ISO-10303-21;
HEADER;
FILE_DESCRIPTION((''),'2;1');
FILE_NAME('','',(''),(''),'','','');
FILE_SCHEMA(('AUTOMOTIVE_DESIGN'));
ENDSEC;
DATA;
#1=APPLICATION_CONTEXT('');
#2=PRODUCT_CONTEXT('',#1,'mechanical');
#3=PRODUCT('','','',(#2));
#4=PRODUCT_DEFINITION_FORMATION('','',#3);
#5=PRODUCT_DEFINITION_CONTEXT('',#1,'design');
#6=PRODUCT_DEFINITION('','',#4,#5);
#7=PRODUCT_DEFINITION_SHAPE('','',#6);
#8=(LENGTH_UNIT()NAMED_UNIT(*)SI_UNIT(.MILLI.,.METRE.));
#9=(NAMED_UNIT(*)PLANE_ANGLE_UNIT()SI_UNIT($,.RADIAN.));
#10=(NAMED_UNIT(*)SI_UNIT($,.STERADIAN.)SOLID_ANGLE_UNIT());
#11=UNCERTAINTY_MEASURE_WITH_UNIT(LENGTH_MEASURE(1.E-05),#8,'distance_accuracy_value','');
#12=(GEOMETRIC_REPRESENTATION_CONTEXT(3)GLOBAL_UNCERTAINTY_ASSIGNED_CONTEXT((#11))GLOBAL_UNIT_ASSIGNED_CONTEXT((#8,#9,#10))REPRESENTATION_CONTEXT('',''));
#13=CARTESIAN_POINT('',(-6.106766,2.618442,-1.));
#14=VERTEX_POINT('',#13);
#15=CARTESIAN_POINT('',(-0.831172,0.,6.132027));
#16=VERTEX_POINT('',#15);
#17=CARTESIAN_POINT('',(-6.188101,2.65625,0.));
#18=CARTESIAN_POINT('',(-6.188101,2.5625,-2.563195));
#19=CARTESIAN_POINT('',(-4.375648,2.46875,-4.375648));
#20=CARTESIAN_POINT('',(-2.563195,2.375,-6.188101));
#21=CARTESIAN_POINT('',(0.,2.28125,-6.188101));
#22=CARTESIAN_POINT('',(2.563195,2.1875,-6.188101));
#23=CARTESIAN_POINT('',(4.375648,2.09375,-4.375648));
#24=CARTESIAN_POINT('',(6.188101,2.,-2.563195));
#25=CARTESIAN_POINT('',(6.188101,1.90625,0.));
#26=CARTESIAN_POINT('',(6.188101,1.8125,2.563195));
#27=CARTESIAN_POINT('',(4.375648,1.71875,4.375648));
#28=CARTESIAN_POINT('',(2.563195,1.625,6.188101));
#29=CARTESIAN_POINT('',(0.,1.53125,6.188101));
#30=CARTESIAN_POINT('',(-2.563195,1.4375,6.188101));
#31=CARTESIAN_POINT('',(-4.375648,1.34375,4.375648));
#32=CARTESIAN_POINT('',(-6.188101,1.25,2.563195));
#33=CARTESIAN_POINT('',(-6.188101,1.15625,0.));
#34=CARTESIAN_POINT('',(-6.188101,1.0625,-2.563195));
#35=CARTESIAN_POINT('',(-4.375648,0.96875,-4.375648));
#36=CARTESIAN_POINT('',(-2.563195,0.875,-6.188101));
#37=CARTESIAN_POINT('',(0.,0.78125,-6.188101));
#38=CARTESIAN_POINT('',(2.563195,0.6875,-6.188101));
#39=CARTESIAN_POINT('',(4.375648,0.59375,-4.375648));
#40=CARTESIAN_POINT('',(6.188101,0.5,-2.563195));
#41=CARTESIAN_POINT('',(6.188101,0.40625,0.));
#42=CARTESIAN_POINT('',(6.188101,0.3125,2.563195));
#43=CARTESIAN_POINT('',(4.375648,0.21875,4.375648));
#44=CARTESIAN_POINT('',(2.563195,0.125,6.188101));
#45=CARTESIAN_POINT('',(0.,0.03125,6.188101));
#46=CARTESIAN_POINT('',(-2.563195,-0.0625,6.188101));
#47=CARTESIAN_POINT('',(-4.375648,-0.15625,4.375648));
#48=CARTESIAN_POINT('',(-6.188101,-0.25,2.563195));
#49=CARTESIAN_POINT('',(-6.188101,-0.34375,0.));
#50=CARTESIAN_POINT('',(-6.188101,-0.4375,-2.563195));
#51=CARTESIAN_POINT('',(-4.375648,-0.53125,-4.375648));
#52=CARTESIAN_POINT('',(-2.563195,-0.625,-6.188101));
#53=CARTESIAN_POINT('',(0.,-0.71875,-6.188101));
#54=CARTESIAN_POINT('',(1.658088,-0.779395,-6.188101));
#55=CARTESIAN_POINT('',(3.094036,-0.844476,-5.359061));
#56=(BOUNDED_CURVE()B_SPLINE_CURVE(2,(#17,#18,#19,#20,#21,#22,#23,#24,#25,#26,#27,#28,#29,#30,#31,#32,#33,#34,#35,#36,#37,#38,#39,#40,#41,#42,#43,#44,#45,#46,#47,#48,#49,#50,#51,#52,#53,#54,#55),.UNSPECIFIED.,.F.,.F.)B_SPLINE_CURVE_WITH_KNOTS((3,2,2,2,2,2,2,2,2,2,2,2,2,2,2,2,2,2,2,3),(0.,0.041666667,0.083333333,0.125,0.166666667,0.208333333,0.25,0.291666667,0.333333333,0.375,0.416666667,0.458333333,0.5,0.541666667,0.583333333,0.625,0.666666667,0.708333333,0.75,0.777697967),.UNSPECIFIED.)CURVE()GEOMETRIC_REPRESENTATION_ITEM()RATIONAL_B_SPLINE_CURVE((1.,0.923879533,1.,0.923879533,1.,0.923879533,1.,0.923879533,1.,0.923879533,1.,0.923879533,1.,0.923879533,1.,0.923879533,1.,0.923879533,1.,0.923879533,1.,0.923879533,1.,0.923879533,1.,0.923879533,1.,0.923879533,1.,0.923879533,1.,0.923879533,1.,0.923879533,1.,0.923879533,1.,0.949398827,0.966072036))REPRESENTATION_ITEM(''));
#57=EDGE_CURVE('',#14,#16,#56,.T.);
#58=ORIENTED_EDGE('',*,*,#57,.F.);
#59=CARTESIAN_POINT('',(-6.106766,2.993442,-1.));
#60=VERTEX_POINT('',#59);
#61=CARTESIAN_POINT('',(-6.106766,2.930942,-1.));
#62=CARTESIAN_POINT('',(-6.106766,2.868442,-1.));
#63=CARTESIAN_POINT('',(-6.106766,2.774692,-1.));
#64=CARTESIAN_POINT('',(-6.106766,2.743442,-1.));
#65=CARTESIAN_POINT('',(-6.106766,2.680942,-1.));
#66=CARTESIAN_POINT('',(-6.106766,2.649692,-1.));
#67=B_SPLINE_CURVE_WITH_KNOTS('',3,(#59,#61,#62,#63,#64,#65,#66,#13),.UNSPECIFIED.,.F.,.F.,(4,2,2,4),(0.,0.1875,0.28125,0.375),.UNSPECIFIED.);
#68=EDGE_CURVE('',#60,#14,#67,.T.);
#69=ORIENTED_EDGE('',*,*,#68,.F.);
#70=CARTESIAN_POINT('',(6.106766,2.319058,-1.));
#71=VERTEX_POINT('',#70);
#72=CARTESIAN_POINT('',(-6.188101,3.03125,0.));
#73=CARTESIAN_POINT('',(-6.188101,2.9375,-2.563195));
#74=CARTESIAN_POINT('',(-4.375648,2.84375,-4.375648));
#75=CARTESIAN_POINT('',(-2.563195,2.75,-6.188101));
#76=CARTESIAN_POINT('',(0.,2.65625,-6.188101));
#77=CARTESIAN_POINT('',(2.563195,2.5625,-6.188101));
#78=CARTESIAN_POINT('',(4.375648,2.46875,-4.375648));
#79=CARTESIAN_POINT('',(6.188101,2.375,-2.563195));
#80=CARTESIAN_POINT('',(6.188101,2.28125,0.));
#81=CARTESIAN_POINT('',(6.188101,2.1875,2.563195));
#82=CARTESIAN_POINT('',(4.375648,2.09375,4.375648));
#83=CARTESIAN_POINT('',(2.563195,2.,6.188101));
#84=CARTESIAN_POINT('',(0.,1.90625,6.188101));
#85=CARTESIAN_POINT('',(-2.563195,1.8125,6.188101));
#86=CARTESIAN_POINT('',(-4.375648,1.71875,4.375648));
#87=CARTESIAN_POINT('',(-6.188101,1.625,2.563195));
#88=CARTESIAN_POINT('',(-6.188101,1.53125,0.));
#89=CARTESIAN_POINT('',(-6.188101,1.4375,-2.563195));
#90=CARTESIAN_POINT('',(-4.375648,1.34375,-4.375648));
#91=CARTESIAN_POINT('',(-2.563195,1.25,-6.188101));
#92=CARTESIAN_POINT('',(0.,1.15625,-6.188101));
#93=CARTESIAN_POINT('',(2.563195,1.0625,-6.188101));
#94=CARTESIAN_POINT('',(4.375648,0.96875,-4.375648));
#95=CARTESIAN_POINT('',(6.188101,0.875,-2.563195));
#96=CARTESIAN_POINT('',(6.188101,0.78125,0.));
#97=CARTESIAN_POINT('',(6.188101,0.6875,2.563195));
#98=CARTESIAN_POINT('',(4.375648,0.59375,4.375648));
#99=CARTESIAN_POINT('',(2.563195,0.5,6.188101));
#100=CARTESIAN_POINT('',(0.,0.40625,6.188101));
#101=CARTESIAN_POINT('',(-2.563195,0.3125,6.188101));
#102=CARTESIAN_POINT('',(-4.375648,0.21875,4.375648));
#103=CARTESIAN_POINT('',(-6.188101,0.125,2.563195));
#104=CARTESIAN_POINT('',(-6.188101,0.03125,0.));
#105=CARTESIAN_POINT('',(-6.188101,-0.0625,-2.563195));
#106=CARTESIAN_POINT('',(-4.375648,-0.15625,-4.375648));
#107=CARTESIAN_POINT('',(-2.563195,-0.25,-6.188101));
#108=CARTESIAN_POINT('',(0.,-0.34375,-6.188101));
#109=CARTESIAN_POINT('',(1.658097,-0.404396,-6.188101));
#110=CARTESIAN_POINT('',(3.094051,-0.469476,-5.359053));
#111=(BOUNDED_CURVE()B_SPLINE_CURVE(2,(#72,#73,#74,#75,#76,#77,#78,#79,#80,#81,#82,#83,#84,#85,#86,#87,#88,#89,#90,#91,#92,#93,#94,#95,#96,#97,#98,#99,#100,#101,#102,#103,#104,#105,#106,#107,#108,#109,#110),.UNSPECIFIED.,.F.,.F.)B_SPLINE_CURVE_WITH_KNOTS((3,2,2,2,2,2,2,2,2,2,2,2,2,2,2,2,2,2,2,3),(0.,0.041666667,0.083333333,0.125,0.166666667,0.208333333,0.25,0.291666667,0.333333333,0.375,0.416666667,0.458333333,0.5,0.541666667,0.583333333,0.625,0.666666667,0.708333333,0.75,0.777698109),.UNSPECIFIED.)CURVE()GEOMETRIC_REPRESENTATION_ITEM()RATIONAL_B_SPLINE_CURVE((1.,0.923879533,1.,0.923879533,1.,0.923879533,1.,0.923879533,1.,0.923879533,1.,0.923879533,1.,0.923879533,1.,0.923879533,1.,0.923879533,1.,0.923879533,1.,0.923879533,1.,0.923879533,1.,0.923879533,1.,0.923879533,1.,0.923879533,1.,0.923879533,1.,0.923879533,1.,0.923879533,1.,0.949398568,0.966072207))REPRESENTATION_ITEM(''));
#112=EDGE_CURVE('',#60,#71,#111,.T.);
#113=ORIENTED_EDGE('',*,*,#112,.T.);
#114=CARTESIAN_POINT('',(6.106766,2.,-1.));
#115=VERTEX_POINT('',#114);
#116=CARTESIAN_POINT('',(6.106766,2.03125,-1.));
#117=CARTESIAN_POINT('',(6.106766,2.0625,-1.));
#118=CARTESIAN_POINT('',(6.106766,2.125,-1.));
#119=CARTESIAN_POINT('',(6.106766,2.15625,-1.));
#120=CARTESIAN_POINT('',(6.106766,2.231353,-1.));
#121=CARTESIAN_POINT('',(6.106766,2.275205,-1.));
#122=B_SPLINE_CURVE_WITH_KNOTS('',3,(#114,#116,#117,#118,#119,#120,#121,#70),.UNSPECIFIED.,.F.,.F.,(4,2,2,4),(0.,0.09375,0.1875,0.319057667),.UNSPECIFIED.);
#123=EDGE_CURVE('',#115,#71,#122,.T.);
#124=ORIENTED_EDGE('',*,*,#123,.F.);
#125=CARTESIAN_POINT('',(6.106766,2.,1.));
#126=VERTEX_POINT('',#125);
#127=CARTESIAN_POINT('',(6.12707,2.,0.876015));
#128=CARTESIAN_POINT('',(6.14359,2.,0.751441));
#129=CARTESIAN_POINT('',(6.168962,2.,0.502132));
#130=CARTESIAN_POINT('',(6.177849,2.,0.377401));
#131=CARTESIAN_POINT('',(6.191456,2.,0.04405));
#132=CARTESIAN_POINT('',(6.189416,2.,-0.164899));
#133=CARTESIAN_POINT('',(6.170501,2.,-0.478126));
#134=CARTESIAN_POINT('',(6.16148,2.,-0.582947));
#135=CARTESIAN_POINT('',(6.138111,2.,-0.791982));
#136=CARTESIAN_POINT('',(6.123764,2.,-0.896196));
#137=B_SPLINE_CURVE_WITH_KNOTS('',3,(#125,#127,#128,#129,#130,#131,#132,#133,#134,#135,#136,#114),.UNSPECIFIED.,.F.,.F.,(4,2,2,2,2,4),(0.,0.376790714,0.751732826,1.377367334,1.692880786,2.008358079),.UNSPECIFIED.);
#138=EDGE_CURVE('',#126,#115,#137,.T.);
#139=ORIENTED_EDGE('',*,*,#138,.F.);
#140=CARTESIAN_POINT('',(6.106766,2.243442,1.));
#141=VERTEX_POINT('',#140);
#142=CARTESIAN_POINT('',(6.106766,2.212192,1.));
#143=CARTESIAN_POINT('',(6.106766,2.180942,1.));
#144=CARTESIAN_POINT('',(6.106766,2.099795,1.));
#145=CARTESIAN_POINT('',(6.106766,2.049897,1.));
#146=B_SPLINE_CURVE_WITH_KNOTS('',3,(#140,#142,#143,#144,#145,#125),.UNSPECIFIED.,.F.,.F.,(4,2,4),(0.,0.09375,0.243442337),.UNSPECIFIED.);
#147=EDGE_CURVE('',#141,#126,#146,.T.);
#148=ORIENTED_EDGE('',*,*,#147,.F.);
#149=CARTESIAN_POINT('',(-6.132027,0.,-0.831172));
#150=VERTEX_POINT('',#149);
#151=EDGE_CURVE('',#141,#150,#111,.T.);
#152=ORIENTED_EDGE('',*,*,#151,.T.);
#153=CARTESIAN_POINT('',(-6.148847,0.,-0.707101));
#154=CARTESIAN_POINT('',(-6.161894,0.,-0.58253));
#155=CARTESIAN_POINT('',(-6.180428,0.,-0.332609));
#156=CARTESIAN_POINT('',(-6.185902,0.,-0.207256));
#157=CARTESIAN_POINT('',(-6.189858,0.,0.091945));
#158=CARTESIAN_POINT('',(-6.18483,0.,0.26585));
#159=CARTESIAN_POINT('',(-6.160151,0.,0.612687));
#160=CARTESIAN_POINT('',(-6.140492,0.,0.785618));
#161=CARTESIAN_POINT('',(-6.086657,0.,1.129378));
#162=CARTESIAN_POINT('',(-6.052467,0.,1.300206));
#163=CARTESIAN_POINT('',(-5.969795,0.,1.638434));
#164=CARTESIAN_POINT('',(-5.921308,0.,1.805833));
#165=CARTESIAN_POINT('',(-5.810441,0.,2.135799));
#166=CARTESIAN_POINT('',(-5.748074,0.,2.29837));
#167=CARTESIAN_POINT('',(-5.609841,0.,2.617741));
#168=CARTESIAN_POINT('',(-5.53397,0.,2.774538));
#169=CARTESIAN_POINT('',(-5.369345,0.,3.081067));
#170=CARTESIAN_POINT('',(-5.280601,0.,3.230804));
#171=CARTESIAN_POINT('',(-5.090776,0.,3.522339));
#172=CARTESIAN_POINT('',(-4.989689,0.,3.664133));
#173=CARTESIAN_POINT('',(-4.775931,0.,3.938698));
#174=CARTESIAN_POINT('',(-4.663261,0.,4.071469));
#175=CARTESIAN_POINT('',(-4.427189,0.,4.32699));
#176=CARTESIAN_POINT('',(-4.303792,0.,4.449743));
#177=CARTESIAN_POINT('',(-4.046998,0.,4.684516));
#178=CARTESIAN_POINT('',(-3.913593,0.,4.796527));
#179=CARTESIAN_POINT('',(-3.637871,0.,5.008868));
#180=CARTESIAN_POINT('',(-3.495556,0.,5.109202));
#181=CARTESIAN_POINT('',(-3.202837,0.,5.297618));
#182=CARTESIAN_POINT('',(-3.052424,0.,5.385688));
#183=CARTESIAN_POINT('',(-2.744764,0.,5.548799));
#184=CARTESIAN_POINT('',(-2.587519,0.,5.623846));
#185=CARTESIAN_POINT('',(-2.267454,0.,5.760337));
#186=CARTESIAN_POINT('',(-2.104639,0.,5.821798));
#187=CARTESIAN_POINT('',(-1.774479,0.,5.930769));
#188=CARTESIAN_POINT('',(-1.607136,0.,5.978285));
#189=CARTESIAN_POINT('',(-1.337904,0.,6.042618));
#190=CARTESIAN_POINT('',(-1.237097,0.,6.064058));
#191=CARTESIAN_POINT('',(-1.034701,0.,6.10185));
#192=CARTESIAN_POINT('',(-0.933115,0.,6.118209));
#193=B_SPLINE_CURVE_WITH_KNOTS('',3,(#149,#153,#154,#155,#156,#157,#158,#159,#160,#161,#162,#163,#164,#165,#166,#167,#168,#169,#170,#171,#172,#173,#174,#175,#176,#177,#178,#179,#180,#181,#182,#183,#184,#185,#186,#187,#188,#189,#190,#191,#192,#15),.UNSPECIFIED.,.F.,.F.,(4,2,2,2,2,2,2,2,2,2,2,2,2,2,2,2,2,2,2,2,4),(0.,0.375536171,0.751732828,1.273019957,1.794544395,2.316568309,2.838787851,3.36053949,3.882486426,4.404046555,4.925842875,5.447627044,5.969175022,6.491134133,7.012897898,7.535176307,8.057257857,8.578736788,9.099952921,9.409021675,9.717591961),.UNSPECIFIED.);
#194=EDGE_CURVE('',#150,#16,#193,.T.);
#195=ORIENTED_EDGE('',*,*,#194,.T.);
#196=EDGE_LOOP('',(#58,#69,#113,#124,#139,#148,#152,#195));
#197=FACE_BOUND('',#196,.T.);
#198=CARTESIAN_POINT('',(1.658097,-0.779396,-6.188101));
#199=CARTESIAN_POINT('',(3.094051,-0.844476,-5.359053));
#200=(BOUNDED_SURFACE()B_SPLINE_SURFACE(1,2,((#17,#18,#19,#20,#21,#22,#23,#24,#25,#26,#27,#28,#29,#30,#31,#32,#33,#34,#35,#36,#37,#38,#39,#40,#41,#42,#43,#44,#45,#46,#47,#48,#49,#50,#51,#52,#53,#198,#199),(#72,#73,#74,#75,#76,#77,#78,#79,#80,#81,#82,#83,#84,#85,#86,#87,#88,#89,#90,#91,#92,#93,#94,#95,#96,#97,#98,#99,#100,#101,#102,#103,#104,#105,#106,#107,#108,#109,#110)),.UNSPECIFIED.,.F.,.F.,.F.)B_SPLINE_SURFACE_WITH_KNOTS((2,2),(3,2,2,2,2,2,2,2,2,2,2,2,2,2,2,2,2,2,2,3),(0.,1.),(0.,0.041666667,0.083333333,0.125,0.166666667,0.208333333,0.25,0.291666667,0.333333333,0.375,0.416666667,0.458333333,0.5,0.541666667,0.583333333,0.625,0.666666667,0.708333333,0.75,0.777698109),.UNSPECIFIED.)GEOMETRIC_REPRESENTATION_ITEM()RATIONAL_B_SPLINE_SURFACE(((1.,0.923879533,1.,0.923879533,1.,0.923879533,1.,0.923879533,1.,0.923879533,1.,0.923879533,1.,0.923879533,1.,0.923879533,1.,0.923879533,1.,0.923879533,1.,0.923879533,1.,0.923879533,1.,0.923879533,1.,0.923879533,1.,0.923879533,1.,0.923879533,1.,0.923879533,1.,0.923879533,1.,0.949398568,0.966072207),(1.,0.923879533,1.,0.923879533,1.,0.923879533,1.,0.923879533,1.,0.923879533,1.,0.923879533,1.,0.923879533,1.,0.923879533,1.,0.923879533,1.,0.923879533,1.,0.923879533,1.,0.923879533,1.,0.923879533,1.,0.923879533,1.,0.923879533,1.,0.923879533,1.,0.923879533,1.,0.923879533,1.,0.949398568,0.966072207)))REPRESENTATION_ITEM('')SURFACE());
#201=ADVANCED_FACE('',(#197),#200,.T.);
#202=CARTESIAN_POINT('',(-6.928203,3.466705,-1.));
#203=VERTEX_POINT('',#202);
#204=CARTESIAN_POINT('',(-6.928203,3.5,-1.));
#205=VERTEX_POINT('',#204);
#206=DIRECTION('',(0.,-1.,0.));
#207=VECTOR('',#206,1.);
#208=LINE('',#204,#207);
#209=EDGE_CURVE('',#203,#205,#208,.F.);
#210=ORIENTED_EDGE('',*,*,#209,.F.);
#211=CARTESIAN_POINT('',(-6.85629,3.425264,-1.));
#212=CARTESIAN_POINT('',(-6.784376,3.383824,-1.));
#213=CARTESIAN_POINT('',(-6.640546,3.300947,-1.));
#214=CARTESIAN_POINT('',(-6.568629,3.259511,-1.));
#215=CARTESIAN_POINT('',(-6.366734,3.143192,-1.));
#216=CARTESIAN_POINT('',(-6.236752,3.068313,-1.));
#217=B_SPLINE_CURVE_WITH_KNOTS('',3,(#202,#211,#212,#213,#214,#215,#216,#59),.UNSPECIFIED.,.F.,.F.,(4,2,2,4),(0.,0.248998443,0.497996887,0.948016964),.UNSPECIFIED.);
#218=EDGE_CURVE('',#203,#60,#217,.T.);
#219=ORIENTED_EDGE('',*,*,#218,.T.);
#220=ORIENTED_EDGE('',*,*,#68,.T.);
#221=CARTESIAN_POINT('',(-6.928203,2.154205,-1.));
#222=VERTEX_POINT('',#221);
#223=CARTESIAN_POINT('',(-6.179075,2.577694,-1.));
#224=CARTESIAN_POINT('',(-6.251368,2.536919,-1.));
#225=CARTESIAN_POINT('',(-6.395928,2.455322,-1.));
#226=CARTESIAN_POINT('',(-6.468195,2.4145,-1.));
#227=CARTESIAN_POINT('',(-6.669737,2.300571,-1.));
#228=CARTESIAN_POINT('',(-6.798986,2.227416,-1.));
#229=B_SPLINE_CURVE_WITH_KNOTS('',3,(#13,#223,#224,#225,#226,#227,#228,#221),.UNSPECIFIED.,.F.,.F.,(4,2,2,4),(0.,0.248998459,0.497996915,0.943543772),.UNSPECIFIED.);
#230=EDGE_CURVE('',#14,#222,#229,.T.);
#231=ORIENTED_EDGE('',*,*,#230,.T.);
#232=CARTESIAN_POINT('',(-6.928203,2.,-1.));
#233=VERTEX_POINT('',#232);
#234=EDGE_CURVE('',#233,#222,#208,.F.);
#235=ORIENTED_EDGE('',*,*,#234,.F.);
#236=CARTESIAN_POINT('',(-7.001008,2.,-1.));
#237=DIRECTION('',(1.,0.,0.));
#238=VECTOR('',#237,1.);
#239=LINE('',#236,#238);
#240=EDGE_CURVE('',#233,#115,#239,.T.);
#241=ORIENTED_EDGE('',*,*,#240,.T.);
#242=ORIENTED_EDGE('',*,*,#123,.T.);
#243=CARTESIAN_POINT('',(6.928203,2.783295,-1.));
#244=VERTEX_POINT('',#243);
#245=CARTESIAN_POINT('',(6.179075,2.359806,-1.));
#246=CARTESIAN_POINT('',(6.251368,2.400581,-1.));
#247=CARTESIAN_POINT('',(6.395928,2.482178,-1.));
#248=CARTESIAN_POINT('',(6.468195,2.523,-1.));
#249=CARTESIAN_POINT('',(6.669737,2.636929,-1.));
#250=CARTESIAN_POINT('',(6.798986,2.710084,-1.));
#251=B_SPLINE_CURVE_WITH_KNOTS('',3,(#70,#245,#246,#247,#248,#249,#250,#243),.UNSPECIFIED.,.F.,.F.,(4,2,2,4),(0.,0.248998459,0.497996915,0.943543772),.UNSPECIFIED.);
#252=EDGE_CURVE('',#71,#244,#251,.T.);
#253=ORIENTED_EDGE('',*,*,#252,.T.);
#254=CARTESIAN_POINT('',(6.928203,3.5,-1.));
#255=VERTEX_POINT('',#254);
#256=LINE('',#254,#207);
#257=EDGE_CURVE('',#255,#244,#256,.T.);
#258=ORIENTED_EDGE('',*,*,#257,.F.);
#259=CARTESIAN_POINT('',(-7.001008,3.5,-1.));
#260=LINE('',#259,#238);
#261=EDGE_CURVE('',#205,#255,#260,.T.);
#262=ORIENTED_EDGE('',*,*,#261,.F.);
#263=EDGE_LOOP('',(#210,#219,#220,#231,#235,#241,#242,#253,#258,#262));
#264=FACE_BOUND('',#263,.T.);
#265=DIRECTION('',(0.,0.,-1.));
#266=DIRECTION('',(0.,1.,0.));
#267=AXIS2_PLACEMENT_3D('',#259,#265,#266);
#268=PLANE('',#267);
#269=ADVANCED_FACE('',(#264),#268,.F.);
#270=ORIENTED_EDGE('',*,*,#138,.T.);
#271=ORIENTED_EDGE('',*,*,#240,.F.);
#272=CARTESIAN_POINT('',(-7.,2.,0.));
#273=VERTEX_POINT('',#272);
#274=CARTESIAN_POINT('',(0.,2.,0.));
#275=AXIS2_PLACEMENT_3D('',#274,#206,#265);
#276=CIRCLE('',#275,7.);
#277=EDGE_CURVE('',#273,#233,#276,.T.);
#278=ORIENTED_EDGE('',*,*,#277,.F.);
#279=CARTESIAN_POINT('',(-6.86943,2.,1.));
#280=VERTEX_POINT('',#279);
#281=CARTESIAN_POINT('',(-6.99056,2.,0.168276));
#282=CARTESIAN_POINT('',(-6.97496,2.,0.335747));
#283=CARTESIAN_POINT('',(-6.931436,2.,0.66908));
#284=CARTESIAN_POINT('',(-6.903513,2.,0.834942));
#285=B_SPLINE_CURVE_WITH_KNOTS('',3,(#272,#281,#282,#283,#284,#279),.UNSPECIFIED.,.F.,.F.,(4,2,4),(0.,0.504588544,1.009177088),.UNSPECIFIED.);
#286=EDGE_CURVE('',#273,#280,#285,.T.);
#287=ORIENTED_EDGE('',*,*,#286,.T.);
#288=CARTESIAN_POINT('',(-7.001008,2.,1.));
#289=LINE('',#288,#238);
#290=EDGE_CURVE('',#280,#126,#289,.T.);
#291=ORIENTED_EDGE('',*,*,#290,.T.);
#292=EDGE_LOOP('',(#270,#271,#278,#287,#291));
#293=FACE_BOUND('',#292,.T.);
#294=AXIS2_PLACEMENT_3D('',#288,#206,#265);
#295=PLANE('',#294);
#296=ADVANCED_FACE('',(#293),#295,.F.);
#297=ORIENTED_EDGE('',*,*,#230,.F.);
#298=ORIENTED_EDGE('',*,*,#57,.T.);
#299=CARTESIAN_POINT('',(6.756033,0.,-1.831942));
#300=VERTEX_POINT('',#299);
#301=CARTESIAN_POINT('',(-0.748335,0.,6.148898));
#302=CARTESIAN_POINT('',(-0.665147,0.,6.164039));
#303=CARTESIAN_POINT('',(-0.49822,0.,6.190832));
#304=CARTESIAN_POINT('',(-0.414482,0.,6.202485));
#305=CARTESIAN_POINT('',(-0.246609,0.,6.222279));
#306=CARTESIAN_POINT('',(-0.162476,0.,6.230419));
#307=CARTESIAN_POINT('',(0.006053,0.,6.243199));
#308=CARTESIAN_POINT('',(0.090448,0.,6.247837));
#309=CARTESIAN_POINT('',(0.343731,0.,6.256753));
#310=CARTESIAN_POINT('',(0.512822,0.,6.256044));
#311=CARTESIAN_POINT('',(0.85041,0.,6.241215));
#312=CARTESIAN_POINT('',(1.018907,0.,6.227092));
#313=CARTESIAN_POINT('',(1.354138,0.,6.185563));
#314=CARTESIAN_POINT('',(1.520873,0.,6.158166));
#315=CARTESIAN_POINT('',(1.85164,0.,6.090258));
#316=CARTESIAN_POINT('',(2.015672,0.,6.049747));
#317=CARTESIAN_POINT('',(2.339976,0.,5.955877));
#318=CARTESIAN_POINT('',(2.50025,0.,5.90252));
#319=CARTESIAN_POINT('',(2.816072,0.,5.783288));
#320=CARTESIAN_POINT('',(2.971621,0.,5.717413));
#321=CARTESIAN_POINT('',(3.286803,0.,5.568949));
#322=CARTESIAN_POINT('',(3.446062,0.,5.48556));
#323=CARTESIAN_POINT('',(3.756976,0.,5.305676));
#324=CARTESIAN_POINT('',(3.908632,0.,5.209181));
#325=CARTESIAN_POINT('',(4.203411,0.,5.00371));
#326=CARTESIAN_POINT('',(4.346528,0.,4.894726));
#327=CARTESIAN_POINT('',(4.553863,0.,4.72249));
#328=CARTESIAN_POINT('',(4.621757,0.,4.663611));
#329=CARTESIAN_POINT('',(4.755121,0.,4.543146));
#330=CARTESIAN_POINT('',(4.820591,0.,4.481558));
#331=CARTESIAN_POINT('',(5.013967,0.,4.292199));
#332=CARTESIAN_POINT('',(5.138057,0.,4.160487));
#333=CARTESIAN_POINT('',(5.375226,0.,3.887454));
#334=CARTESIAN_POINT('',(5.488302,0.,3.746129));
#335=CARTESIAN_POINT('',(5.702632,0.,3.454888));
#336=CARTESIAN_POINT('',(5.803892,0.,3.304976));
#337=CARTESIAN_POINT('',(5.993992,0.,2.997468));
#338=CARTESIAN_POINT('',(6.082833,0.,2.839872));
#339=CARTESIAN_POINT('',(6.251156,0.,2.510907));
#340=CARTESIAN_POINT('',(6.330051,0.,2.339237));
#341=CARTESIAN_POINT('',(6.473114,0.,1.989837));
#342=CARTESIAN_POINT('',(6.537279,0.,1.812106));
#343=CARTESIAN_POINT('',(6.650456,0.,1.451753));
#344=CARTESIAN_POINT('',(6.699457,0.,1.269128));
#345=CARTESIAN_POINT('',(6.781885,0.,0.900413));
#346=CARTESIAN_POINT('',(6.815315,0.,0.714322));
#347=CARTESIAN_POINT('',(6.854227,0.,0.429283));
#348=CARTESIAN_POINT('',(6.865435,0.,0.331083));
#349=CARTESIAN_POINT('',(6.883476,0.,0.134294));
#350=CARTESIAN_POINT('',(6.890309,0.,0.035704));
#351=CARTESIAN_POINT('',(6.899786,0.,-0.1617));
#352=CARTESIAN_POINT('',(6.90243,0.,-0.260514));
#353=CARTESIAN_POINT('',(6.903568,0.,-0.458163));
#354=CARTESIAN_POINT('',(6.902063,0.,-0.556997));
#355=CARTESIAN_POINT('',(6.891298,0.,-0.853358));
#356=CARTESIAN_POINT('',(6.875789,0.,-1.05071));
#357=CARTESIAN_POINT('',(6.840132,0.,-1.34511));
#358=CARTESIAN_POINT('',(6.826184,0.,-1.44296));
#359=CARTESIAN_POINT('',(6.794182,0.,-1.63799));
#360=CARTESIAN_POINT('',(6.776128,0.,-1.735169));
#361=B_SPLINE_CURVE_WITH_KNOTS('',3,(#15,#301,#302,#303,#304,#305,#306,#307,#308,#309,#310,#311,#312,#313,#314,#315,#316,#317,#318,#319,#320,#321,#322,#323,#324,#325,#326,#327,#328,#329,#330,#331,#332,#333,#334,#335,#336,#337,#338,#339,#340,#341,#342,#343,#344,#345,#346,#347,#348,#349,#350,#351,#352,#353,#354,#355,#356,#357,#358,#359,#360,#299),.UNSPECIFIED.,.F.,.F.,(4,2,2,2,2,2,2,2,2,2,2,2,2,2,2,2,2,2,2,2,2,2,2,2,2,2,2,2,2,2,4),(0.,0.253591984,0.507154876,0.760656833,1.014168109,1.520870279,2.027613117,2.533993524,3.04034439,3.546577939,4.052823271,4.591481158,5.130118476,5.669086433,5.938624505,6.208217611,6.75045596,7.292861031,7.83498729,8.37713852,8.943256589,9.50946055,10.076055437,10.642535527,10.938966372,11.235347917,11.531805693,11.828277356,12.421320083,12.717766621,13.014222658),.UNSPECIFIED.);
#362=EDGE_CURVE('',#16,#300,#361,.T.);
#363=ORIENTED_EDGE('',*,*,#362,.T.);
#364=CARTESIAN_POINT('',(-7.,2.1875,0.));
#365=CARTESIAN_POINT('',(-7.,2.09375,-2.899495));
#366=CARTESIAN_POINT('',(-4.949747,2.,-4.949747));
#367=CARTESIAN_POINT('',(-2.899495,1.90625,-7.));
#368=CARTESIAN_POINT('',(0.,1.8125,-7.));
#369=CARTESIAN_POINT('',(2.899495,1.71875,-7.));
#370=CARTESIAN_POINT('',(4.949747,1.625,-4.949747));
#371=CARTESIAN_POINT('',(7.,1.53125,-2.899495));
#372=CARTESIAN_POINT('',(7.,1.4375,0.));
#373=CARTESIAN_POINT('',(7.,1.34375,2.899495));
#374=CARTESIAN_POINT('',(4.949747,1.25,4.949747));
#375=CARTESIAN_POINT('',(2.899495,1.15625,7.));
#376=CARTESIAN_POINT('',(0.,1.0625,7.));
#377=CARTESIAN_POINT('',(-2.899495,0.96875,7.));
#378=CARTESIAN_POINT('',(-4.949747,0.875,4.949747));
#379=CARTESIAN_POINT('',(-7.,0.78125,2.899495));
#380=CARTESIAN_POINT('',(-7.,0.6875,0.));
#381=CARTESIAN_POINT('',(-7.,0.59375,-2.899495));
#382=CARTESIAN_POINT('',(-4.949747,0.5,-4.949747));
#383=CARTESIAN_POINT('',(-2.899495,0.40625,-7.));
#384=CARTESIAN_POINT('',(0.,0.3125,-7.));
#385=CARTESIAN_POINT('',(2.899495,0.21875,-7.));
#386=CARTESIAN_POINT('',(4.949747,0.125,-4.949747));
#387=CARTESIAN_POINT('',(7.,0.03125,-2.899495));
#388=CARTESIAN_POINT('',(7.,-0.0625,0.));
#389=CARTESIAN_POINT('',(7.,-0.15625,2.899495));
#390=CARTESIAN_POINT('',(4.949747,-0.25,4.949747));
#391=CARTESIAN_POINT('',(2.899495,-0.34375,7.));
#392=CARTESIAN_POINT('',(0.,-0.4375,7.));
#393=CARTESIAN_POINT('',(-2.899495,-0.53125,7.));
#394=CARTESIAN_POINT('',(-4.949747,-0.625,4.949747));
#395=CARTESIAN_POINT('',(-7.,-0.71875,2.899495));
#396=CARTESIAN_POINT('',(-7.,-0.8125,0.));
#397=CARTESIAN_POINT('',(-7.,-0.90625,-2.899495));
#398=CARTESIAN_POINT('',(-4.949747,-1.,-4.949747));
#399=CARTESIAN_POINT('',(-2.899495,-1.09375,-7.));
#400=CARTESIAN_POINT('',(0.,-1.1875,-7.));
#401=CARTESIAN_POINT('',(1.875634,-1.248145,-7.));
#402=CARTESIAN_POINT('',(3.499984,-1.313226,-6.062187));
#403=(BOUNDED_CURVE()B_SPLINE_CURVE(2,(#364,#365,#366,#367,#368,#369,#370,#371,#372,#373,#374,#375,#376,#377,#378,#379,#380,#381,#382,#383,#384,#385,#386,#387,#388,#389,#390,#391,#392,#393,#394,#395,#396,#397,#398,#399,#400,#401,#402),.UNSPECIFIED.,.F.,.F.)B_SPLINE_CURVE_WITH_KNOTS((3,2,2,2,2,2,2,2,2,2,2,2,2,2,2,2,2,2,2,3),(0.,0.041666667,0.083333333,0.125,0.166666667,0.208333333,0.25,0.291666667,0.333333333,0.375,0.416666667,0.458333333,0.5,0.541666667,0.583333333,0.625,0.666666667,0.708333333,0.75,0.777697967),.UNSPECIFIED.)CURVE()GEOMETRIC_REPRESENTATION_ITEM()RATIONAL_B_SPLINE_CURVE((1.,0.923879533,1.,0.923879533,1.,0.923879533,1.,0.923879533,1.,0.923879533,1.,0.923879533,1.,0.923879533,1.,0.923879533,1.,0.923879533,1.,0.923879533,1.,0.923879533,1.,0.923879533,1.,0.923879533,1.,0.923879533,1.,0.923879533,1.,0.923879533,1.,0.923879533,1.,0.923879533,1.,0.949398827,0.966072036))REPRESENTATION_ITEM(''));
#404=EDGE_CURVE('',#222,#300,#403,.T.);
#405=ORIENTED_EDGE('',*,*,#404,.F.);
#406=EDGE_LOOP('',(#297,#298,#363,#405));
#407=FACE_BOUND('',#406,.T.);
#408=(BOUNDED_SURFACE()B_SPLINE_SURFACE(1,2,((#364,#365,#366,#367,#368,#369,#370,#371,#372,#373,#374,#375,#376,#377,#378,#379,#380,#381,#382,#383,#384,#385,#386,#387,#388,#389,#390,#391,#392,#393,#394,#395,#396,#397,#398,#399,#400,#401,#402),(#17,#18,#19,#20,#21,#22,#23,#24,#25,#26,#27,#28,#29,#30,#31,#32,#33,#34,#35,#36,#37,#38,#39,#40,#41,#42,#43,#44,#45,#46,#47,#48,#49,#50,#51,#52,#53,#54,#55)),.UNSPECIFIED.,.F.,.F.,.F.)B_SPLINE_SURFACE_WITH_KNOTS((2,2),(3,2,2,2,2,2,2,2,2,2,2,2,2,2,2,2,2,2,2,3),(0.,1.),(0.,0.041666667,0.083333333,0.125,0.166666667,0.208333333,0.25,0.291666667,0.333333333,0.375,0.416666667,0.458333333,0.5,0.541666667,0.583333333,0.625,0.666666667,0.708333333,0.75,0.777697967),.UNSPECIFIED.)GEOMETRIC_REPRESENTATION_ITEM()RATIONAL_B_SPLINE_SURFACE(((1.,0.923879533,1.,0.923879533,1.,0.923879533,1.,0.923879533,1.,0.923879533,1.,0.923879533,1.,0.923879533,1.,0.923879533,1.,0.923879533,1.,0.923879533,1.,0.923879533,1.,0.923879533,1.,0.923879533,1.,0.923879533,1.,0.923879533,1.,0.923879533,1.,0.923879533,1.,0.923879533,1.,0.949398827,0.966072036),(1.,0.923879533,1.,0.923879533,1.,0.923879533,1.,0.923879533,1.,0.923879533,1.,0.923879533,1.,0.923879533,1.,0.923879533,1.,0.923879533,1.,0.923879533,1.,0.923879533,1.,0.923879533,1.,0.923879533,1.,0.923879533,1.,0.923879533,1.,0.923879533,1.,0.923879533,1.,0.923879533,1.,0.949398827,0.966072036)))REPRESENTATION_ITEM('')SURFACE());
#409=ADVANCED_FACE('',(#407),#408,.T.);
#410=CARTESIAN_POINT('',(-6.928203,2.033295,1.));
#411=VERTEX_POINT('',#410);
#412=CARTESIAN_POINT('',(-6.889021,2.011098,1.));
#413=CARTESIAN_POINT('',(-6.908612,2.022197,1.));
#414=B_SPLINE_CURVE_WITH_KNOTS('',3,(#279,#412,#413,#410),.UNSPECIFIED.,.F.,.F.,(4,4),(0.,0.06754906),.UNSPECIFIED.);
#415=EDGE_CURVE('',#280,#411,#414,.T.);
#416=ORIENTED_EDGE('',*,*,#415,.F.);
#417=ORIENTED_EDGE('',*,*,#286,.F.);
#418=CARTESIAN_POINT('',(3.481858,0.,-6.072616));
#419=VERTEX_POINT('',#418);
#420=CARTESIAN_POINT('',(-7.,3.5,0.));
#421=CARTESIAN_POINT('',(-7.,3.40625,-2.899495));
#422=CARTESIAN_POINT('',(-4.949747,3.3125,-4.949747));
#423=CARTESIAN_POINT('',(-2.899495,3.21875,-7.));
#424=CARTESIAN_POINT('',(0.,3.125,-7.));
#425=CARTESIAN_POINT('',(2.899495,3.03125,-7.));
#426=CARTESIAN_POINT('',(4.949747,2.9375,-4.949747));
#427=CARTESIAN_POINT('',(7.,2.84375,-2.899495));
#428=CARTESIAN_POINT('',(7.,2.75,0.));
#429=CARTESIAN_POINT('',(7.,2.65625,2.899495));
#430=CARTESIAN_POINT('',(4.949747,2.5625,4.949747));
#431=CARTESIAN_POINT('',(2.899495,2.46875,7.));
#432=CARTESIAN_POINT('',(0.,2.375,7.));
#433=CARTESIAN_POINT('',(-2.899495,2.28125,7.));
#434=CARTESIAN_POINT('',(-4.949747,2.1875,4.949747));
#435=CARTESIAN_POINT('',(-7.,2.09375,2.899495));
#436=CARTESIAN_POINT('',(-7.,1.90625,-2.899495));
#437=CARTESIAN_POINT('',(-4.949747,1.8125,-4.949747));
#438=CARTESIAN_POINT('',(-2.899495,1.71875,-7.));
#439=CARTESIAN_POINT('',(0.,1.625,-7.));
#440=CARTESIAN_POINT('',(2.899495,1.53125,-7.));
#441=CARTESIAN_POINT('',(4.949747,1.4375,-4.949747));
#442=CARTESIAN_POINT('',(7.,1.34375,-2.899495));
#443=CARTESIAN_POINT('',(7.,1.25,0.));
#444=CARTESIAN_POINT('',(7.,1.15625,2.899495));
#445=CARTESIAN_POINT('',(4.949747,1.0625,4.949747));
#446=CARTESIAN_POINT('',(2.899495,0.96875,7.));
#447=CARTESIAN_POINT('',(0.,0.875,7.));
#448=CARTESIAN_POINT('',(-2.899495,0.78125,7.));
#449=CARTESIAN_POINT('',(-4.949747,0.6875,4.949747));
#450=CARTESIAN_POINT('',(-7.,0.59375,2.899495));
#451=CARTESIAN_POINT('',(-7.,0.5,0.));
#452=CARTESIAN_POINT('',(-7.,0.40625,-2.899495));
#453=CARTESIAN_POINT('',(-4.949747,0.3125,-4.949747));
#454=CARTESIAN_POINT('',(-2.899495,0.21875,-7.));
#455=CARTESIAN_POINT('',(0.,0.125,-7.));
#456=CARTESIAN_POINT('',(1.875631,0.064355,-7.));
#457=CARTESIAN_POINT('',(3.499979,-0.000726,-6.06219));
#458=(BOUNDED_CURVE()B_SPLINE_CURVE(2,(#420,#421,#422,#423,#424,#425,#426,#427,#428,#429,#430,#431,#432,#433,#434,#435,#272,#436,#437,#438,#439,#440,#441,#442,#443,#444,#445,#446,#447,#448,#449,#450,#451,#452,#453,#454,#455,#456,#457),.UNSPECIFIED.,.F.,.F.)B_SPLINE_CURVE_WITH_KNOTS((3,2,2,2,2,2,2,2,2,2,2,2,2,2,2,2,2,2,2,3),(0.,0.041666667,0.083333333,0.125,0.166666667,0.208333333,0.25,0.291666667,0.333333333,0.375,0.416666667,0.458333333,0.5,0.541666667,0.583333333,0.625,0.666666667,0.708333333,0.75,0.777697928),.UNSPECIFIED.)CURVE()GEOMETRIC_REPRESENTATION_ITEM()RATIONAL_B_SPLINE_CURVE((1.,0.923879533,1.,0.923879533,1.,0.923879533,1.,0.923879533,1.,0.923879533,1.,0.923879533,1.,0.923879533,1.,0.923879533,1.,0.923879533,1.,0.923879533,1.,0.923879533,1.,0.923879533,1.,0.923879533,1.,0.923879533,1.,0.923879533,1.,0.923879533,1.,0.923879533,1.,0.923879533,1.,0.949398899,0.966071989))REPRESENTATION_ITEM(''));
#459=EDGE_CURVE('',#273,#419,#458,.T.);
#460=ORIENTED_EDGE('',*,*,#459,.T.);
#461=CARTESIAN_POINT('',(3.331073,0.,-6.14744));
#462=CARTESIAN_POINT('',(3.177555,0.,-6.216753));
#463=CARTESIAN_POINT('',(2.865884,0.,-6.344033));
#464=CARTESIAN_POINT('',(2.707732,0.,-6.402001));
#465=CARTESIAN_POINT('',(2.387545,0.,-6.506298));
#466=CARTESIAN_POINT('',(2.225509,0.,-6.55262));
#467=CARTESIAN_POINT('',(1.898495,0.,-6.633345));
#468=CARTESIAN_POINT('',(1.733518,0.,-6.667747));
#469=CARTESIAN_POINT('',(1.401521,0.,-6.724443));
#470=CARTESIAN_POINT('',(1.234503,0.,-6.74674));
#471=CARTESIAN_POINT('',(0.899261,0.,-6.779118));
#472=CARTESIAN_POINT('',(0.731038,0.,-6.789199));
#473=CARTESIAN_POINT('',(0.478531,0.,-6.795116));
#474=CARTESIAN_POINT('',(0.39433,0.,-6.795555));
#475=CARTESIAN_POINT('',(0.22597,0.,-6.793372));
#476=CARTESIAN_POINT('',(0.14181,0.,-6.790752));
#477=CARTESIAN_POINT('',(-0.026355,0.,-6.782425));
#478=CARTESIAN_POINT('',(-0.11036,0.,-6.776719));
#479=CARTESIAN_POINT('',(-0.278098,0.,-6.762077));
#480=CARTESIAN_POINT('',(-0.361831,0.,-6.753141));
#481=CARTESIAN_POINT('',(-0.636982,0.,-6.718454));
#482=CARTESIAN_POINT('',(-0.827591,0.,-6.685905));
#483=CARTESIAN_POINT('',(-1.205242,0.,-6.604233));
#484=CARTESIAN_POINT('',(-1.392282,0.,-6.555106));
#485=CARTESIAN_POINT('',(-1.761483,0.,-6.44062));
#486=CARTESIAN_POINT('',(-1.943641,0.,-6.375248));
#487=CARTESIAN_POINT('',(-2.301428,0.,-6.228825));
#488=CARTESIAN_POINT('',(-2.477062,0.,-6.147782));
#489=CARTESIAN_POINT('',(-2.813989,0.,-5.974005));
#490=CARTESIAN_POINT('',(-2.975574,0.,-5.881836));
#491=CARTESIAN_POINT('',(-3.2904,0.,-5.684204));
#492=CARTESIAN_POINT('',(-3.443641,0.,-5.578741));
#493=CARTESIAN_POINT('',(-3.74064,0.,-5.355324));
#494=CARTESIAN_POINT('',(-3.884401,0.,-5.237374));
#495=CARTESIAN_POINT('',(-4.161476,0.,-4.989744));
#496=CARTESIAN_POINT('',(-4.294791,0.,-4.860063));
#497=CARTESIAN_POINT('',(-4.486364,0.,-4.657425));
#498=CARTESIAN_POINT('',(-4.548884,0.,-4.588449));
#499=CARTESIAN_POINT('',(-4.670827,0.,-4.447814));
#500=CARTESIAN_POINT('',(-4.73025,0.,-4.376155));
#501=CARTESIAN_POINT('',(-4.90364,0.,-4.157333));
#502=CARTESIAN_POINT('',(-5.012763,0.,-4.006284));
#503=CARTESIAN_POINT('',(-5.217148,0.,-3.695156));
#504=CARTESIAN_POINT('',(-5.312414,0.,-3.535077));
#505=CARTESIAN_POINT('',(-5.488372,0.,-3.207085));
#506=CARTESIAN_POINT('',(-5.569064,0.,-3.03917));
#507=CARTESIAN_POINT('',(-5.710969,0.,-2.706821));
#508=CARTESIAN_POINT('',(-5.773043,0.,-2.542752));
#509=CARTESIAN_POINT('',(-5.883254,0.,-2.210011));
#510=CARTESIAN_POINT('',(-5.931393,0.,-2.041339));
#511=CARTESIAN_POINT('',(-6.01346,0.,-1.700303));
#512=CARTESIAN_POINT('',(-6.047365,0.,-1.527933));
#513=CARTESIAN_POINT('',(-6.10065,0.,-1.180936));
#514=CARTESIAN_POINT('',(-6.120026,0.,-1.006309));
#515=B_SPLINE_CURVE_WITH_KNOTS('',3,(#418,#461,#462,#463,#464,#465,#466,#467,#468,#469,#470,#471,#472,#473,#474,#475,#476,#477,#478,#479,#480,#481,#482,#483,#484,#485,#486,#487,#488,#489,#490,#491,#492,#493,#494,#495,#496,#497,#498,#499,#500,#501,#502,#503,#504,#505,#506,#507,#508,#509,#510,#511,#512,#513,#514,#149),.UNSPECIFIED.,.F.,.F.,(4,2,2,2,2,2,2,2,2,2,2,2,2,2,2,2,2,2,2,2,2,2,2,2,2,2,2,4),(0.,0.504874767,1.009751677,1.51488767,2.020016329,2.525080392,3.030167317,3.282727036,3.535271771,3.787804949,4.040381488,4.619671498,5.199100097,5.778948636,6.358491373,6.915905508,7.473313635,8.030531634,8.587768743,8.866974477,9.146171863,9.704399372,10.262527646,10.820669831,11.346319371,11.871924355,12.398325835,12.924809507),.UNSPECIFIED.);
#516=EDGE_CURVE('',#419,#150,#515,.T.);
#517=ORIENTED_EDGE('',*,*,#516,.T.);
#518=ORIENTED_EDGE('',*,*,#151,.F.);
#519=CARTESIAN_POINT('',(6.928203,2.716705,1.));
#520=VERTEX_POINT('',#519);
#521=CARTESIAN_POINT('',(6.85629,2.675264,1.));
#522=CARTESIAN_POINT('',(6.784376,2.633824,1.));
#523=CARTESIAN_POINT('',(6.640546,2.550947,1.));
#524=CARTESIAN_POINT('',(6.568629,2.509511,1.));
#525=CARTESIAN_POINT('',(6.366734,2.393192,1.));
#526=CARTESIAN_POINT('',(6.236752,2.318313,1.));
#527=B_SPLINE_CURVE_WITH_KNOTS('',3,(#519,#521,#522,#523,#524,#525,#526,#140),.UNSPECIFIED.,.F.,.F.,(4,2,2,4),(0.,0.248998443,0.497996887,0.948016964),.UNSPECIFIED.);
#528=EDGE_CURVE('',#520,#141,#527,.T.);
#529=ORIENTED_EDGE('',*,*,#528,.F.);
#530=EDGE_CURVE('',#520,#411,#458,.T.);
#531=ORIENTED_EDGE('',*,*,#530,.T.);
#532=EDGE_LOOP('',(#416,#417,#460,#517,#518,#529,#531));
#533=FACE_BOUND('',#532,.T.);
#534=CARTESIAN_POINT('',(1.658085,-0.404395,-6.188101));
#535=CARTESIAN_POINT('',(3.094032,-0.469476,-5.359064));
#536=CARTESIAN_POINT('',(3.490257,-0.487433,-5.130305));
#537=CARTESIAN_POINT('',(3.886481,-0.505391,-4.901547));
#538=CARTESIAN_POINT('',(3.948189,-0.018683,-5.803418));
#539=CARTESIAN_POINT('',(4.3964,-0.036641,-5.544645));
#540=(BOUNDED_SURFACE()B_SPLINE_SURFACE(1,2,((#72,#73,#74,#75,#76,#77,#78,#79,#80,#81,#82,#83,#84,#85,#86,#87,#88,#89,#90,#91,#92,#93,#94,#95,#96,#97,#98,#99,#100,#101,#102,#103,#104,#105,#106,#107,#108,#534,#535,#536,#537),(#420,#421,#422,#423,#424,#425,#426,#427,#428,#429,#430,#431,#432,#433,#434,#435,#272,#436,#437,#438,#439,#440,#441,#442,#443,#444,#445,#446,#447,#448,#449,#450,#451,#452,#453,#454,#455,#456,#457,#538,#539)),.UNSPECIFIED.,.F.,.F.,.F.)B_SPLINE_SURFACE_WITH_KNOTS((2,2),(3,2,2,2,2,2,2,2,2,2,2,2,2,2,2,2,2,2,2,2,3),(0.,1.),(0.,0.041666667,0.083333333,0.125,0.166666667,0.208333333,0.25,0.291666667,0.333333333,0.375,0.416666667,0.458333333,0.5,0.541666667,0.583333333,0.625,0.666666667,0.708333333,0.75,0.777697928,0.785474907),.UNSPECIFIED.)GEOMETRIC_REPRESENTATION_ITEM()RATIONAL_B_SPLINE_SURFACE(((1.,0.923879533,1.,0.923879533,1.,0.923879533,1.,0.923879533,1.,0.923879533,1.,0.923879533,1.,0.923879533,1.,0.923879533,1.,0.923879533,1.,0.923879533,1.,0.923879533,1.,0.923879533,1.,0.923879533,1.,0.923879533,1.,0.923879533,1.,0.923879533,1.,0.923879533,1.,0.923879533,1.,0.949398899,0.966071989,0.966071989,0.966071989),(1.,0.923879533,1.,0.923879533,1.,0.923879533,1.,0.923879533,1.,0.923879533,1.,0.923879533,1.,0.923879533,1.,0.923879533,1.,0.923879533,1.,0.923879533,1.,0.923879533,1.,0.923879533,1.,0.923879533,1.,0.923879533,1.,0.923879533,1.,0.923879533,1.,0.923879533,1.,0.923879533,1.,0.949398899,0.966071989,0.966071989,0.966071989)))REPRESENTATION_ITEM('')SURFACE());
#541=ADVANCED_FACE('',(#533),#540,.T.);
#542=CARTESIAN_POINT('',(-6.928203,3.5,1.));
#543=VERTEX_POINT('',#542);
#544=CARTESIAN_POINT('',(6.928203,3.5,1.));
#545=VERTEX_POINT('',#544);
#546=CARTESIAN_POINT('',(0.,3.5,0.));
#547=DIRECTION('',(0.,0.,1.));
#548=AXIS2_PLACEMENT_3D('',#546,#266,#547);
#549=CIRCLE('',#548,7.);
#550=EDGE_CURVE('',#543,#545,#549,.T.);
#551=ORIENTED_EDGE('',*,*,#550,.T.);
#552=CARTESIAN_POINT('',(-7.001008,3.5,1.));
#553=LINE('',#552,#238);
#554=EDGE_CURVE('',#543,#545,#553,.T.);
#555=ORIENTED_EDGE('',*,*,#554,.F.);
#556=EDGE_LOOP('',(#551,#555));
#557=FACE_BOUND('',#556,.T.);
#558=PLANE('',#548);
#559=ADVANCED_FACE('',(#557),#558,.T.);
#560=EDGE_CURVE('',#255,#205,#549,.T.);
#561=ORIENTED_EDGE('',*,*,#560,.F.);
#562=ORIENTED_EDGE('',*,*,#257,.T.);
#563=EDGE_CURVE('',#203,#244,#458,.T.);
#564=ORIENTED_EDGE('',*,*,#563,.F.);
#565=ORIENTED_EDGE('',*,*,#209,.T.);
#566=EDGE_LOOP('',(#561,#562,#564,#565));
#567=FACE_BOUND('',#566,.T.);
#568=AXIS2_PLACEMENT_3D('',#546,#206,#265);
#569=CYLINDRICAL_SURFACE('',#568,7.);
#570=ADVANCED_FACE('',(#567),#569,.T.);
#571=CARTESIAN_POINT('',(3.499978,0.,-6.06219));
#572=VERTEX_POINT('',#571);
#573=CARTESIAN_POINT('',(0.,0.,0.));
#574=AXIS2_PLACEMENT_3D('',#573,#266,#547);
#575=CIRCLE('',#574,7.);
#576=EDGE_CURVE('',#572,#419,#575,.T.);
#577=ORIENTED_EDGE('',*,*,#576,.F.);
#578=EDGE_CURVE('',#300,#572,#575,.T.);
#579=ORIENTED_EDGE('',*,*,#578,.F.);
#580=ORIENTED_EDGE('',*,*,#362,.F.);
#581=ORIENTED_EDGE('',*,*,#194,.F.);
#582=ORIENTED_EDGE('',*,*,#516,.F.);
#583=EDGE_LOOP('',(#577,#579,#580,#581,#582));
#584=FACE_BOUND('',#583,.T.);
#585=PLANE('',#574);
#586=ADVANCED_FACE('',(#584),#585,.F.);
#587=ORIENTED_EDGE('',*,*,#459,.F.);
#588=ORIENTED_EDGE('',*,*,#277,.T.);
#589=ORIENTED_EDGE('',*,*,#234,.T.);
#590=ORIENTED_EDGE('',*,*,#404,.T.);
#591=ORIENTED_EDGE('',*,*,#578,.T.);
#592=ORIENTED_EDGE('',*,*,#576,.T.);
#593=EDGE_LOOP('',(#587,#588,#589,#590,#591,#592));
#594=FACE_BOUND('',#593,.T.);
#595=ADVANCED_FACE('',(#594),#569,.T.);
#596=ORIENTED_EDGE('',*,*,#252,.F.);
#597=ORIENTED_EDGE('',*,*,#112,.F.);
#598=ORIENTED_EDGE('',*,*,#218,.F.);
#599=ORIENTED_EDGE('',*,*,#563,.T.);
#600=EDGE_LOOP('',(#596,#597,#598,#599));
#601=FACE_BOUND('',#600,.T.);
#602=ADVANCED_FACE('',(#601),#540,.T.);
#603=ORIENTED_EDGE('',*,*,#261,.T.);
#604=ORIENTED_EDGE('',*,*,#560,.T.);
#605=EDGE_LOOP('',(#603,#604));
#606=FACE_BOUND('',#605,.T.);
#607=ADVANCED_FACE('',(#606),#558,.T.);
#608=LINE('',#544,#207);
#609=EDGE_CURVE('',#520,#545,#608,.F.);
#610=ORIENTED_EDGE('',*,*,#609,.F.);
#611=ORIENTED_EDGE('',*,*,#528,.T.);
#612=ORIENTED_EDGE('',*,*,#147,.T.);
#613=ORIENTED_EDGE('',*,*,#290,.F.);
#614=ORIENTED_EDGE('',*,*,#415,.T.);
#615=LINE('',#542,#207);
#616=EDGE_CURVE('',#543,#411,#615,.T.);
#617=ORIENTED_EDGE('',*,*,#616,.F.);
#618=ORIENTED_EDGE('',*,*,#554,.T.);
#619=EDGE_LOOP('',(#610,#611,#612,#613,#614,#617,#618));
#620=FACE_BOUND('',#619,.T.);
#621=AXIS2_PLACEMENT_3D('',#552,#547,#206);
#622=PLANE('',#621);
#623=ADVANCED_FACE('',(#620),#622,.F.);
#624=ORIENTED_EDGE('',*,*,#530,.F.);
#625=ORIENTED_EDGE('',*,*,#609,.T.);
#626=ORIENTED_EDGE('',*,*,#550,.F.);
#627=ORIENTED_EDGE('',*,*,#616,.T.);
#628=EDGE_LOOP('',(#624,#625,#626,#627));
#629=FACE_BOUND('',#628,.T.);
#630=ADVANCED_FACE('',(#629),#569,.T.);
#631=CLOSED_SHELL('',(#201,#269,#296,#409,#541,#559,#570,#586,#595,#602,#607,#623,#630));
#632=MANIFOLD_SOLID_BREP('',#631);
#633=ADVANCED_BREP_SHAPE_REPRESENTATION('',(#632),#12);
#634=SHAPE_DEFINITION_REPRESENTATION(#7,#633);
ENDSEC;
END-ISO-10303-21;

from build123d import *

# Parameters (mm, degrees)
SKETCH_1_R               = 7
EXTRUDE_1_DEPTH          = 3.5
THREAD_1_PITCH           = 1.5
CUT_EXTRUDE_1_DEPTH      = 11.5000004
CUT_EXTRUDE_1_DEPTH_BACK = 11.5000004
SKETCH_4_W               = 2
SKETCH_4_H               = 1.5


with BuildPart() as part:
    # Sketch 1 → Бобышка-Вытянуть1 (new body)
    with BuildSketch(Plane(origin=(0, 0, 0), x_dir=(1, 0, 0), z_dir=(0, 1, 0))):
        with Locations(Location((0, 0, 0), (0, 0, 270))):
            Circle(SKETCH_1_R)
    extrude(amount=EXTRUDE_1_DEPTH)

    # Резьба1: the profile of Sketch 1 2 profile screwed along a right-hand helix of 2.333333 turns, 8 arcs to a turn; built about Z, then put on its axis
    thread_1_z = Axis((0, 0, 0), (0, 0, 1))
    thread_1_corners = [(7.0003, 0, -0.000173205), (7.0003, 0, 1.312673201), (6.188101188, 0, 0.843749998), (6.188101188, 0, 0.468749998)]
    with BuildLine(mode=Mode.PRIVATE) as thread_1_profile:
        Line(thread_1_corners[0], thread_1_corners[1])
        Line(thread_1_corners[1], thread_1_corners[2])
        Line(thread_1_corners[2], thread_1_corners[3])
        Line(thread_1_corners[3], thread_1_corners[0])
    thread_1_cap = Face(thread_1_profile.wire())
    thread_1_turn_angles = [0, 22.5, 45, 67.5, 90, 112.5, 135, 157.5, 180, 202.5, 225, 247.5, 270, 292.5, 315, 337.5, 360]
    thread_1_turn_weights = [1, 0.9238795325112867, 1, 0.9238795325112867, 1, 0.9238795325112867, 1, 0.9238795325112867, 1, 0.9238795325112867, 1, 0.9238795325112867, 1, 0.9238795325112867, 1, 0.9238795325112867, 1]
    thread_1_turn_rails = [Edge.make_bspline([Vector(p[0], p[1], 0).rotate(thread_1_z, thread_1_turn_angles[k]) / thread_1_turn_weights[k] + Vector(0, 0, p[2] + THREAD_1_PITCH * thread_1_turn_angles[k] / 360) for k in range(17)], [0, 0, 0, 1, 1, 2, 2, 3, 3, 4, 4, 5, 5, 6, 6, 7, 7, 8, 8, 8], 2, thread_1_turn_weights) for p in thread_1_corners]
    thread_1_turn_sides = [Face.make_surface_from_curves(thread_1_turn_rails[p[0]], thread_1_turn_rails[p[1]]) for p in [(0, 1), (1, 2), (2, 3), (3, 0)]]
    thread_1_last_angles = [720, 742.5, 765, 787.5, 810, 825, 840]
    thread_1_last_weights = [1, 0.9238795325112867, 1, 0.9238795325112867, 1, 0.9659258262890685, 1]
    thread_1_last_rails = [Edge.make_bspline([Vector(p[0], p[1], 0).rotate(thread_1_z, thread_1_last_angles[k]) / thread_1_last_weights[k] + Vector(0, 0, p[2] + THREAD_1_PITCH * thread_1_last_angles[k] / 360) for k in range(7)], [0, 0, 0, 1, 1, 2, 2, 3, 3, 3], 2, thread_1_last_weights) for p in thread_1_corners]
    thread_1_last_sides = [Face.make_surface_from_curves(thread_1_last_rails[p[0]], thread_1_last_rails[p[1]]) for p in [(0, 1), (1, 2), (2, 3), (3, 0)]]
    thread_1 = Plane(origin=(0, 3.5, 0), x_dir=(-1, 0, 0), z_dir=(0, -1, 0)) * Solid(Shell([*[p.moved(Location((0, 0, THREAD_1_PITCH * i))) for i in range(2) for p in thread_1_turn_sides], *thread_1_last_sides, thread_1_cap, thread_1_cap.rotate(thread_1_z, 840).moved(Location((0, 0, THREAD_1_PITCH * 840 / 360)))]))
    add(thread_1, mode=Mode.SUBTRACT)

    # Эскиз4 → Вырез-Вытянуть1 (cut, two sides: drawn at the far end of the back side and taken through both)
    with BuildSketch(Plane(origin=(0, 0, 0), x_dir=(0, 0, -1), z_dir=(1, 0, 0)).offset(-CUT_EXTRUDE_1_DEPTH_BACK)):
        with Locations((0, 2.75)):
            Rectangle(SKETCH_4_W, SKETCH_4_H)
    extrude(amount=CUT_EXTRUDE_1_DEPTH + CUT_EXTRUDE_1_DEPTH_BACK, mode=Mode.SUBTRACT)


solid = part.part
